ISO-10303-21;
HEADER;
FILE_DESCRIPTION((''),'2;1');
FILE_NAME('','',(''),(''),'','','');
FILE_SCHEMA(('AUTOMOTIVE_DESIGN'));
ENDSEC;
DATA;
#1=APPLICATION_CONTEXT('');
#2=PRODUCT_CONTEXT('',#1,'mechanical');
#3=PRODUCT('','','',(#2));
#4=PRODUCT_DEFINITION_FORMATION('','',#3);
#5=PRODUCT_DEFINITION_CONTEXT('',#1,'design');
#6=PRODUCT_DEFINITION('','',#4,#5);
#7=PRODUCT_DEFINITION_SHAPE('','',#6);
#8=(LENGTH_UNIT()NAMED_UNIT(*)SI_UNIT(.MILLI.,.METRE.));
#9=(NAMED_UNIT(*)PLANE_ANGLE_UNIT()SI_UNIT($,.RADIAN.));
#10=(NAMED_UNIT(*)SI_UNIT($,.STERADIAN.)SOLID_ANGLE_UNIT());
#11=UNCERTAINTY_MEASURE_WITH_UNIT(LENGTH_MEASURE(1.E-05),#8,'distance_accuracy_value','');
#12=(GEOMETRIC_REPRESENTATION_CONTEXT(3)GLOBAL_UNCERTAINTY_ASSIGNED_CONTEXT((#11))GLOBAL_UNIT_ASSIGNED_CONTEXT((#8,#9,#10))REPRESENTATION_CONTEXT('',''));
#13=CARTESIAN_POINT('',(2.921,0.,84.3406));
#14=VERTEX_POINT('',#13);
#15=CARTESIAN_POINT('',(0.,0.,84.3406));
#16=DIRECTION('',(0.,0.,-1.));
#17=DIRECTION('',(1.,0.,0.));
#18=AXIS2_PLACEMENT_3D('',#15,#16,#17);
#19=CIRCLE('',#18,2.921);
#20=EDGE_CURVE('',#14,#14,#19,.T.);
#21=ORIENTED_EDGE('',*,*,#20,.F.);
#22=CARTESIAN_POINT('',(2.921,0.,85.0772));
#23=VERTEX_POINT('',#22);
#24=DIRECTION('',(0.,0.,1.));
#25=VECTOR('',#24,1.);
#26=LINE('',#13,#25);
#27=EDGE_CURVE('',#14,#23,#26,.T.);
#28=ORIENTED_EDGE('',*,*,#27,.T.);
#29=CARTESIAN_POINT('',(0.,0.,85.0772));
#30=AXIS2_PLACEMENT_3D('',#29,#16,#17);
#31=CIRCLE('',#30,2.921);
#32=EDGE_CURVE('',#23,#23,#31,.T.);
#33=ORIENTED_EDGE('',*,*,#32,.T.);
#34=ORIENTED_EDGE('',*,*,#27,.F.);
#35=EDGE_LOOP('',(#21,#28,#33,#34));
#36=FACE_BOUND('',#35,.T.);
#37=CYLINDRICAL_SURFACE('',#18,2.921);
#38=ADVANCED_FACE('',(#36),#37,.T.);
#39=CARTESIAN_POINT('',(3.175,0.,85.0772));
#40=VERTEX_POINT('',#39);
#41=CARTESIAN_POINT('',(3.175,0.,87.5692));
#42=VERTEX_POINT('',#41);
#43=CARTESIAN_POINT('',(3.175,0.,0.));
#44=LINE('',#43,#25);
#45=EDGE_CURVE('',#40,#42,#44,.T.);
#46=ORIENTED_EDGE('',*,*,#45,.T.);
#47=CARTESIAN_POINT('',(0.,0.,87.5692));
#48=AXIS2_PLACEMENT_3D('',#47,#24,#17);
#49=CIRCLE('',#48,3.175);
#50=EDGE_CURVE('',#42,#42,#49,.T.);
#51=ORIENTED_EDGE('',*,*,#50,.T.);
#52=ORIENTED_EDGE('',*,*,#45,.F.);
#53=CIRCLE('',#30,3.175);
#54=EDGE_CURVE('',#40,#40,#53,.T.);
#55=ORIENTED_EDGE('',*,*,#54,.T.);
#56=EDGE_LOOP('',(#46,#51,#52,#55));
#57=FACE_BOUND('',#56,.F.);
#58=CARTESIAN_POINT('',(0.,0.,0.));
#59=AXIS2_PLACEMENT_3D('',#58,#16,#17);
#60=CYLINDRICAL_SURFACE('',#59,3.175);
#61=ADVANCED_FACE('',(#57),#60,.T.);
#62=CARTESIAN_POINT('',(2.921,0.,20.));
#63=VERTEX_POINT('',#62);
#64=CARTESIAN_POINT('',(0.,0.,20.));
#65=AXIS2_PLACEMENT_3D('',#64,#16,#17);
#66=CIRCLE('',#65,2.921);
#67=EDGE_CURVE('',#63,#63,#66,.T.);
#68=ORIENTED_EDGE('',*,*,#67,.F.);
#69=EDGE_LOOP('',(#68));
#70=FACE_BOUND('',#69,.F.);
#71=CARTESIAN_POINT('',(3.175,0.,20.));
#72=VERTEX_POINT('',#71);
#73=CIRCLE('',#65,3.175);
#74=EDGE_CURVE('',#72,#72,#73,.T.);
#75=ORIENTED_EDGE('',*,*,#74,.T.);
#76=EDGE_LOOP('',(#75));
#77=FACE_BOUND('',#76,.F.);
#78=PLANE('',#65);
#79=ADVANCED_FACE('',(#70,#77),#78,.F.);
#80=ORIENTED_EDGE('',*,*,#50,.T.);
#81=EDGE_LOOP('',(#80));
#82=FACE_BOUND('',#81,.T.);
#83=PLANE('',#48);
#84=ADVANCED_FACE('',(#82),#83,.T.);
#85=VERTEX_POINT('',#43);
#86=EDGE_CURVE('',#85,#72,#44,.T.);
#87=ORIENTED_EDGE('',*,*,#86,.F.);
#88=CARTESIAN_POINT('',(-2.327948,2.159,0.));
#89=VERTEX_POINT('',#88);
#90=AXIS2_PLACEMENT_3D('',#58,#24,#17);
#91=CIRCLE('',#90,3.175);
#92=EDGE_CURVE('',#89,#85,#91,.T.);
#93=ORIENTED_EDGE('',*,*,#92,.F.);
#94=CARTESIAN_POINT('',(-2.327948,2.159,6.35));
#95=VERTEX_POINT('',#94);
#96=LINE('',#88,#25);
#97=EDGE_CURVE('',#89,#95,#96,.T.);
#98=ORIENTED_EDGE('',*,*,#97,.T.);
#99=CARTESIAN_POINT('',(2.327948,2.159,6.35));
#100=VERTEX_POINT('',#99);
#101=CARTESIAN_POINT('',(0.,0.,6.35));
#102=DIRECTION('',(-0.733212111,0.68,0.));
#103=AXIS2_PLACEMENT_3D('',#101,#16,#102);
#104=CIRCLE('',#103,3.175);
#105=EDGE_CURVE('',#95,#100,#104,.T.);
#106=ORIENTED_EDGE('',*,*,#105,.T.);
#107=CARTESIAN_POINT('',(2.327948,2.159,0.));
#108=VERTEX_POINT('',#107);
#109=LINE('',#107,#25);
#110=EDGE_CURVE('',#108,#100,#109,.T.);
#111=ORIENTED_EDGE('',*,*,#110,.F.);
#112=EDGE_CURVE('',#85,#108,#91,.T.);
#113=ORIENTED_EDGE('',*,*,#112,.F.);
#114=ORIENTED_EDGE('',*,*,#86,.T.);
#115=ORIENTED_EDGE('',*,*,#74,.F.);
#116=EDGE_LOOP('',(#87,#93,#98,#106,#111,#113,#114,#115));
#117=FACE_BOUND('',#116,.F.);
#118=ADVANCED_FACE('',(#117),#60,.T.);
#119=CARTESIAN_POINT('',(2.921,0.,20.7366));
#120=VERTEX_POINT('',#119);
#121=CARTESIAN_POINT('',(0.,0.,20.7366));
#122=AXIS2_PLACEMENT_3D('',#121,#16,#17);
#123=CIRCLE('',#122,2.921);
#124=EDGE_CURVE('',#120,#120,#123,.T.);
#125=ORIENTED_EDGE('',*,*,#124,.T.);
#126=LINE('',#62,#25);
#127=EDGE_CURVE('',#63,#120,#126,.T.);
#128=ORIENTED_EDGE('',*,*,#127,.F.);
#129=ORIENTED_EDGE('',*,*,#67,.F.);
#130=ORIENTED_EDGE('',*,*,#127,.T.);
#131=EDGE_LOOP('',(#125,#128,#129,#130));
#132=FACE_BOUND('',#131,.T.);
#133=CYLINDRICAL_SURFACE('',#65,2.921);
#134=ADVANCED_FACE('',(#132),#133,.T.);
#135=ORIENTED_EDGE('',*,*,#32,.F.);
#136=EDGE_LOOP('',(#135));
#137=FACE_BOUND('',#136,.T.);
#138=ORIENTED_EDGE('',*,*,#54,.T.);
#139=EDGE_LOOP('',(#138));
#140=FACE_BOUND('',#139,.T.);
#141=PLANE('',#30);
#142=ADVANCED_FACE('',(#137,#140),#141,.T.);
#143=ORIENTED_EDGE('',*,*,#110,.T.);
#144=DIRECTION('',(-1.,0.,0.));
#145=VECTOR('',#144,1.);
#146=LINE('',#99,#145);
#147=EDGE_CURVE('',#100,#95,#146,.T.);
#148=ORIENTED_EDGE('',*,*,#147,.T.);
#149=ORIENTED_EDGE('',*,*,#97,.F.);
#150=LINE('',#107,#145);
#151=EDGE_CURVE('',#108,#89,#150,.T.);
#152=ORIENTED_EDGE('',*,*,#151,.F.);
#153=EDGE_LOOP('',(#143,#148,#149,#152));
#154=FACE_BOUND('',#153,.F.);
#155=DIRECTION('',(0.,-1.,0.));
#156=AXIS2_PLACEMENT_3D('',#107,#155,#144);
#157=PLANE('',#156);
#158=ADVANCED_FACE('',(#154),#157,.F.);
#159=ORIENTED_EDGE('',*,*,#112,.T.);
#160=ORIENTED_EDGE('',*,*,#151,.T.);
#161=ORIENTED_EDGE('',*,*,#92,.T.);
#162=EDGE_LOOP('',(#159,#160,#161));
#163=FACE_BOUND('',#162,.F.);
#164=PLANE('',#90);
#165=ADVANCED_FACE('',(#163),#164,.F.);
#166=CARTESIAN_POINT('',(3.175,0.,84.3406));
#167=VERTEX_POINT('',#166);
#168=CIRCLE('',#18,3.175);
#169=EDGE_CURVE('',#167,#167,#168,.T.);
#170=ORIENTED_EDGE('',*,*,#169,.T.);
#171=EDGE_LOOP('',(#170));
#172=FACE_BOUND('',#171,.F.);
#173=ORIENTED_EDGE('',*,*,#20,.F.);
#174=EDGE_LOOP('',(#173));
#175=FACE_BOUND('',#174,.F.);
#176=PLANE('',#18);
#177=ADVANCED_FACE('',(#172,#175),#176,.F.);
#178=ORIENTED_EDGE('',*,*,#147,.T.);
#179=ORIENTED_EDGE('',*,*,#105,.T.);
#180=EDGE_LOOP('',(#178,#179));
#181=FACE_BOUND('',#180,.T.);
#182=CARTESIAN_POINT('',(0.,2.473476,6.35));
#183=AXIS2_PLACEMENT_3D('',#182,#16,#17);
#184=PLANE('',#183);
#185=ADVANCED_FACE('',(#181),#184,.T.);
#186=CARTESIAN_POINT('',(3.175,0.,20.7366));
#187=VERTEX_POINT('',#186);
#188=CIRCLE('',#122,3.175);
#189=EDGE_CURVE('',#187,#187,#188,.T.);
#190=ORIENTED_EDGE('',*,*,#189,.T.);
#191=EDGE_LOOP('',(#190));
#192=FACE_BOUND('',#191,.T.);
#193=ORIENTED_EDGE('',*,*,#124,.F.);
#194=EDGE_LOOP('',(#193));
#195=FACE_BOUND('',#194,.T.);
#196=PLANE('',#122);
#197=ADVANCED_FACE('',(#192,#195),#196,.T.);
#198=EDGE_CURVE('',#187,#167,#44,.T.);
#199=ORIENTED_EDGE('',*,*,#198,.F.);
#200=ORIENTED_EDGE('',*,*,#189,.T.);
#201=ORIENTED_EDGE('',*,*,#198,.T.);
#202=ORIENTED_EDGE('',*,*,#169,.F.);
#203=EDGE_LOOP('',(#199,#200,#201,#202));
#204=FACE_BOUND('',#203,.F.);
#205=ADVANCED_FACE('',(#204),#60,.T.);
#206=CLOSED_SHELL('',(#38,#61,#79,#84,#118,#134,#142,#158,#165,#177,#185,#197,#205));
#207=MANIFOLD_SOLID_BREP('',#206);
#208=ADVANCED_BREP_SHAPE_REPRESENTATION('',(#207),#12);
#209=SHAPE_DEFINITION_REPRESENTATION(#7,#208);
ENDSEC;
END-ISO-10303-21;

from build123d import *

# Parameters (mm, degrees)
F0_R     = 3.175
F1_DEPTH = 87.5692
F3_R     = 3.175
F3_R_2   = 2.921
F4_DEPTH = 0.7366
F6_R     = 3.175
F6_R_2   = 2.921
F7_DEPTH = 0.7366
F9_DEPTH = 6.35


# Not quite as in the source:
# - a length typed as a fraction of an inch, garbled in the dataset ("3 / 203.2 mm" for 3/8 in), is restored


with BuildPart() as f1:
    # F0 (on Top) → F1 (new body)
    with BuildSketch(Plane.XY):
        Circle(F0_R)
    extrude(amount=F1_DEPTH)

    # F3 (on offset) → F4 (cut)
    with BuildSketch(Plane(origin=(0, 0, 20), x_dir=(1, 0, 0), z_dir=(0, 0, -1))):
        Circle(F3_R)
        Circle(F3_R_2, mode=Mode.SUBTRACT)
    extrude(amount=-F4_DEPTH, mode=Mode.SUBTRACT)

    # F6 (on offset) → F7 (cut)
    with BuildSketch(Plane(origin=(0, 0, 84.3406), x_dir=(1, 0, 0), z_dir=(0, 0, -1))):
        Circle(F6_R)
        Circle(F6_R_2, mode=Mode.SUBTRACT)
    extrude(amount=-F7_DEPTH, mode=Mode.SUBTRACT)

    # F8 (on face) → F9 (cut)
    with BuildSketch(Plane(origin=(0, 0, 0), x_dir=(1, 0, 0), z_dir=(0, 0, -1))):
        with BuildLine():
            Line((2.327948453, -2.159), (-2.327948453, -2.159))
            ThreePointArc((-2.327948453, -2.159), (0, -3.175), (2.327948453, -2.159))
        make_face()
    extrude(amount=-F9_DEPTH, mode=Mode.SUBTRACT)


solid = f1.part
